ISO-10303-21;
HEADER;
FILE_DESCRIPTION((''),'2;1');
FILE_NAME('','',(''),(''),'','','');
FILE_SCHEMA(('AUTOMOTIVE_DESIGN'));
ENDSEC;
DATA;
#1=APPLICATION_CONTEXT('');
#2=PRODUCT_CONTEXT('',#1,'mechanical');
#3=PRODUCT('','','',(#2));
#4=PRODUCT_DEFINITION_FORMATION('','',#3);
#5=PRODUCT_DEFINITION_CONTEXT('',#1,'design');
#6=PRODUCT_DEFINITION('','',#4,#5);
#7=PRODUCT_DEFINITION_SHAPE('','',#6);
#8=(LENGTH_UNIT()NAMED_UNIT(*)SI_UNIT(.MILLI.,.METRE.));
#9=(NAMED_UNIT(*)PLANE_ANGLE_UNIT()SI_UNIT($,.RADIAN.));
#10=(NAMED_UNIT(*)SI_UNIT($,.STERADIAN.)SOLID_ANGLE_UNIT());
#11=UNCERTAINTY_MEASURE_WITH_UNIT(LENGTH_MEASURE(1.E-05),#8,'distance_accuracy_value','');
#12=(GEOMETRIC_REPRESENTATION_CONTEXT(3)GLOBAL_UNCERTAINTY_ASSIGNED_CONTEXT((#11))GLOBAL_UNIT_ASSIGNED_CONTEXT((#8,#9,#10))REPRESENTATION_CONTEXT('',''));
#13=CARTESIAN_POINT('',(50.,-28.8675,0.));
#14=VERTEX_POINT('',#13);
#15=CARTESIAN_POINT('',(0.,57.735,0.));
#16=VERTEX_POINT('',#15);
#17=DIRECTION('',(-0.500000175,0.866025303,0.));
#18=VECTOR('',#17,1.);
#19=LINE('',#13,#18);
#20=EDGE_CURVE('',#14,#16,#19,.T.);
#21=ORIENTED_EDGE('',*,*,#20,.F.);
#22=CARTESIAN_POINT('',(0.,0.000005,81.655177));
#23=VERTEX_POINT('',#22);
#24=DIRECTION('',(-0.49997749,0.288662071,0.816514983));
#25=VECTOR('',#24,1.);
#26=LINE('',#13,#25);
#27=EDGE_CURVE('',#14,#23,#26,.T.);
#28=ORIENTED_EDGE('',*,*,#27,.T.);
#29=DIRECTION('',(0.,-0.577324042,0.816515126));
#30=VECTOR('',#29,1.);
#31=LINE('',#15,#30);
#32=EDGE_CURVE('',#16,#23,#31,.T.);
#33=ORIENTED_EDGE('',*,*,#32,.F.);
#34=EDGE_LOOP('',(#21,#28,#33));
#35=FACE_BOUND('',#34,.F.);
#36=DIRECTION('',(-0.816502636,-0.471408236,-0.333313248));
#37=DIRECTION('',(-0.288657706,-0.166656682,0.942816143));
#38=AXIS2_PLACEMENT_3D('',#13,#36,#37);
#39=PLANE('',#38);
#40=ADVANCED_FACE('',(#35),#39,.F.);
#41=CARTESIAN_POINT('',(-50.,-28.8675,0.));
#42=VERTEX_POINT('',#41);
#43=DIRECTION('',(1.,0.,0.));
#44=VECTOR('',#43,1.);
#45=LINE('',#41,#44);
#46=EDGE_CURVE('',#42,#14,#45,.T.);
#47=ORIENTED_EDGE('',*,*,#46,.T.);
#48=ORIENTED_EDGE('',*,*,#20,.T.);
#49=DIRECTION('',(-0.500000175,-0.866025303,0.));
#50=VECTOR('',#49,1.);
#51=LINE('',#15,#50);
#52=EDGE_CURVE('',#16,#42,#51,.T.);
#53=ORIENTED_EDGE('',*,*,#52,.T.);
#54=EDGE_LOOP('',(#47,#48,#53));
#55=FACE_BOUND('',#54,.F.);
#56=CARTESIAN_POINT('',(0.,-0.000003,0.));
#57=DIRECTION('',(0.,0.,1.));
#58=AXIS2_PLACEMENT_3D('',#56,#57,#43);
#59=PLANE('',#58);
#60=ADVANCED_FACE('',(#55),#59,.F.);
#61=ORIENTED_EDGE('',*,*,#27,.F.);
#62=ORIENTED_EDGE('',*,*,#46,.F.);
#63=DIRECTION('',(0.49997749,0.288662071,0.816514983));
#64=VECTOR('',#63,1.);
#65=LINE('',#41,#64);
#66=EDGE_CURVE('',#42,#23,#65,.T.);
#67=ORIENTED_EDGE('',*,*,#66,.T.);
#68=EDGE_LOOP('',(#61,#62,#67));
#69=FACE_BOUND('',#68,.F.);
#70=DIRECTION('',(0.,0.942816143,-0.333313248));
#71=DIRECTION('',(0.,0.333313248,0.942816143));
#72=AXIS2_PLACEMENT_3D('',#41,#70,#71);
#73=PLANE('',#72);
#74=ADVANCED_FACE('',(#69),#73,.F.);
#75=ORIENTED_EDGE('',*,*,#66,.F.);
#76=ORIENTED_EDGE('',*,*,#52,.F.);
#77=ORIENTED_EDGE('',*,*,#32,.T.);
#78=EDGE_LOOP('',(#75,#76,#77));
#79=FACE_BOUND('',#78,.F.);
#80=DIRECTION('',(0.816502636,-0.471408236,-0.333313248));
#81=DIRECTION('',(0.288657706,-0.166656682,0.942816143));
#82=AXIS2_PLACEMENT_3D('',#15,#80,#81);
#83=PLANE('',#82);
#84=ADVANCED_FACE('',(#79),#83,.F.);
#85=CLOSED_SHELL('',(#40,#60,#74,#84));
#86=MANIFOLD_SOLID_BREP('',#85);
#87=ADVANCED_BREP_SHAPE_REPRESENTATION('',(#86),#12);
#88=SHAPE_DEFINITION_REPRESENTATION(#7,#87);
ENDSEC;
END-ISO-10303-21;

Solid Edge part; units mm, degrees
sketch "Sketch1" plane through (0, 0, 0) normal (0, 0, 1) x (1, 0, 0)
  line L0 (-50, -28.8675) -> (50, -28.8675)
  line L1 (50, -28.8675) -> (0, 57.735)
  line L2 (0, 57.735) -> (-50, -28.8675)
extrude "ExtrudedProtrusion_1" add sketch "Sketch1" along normal blind 121.371 draft 19.47
